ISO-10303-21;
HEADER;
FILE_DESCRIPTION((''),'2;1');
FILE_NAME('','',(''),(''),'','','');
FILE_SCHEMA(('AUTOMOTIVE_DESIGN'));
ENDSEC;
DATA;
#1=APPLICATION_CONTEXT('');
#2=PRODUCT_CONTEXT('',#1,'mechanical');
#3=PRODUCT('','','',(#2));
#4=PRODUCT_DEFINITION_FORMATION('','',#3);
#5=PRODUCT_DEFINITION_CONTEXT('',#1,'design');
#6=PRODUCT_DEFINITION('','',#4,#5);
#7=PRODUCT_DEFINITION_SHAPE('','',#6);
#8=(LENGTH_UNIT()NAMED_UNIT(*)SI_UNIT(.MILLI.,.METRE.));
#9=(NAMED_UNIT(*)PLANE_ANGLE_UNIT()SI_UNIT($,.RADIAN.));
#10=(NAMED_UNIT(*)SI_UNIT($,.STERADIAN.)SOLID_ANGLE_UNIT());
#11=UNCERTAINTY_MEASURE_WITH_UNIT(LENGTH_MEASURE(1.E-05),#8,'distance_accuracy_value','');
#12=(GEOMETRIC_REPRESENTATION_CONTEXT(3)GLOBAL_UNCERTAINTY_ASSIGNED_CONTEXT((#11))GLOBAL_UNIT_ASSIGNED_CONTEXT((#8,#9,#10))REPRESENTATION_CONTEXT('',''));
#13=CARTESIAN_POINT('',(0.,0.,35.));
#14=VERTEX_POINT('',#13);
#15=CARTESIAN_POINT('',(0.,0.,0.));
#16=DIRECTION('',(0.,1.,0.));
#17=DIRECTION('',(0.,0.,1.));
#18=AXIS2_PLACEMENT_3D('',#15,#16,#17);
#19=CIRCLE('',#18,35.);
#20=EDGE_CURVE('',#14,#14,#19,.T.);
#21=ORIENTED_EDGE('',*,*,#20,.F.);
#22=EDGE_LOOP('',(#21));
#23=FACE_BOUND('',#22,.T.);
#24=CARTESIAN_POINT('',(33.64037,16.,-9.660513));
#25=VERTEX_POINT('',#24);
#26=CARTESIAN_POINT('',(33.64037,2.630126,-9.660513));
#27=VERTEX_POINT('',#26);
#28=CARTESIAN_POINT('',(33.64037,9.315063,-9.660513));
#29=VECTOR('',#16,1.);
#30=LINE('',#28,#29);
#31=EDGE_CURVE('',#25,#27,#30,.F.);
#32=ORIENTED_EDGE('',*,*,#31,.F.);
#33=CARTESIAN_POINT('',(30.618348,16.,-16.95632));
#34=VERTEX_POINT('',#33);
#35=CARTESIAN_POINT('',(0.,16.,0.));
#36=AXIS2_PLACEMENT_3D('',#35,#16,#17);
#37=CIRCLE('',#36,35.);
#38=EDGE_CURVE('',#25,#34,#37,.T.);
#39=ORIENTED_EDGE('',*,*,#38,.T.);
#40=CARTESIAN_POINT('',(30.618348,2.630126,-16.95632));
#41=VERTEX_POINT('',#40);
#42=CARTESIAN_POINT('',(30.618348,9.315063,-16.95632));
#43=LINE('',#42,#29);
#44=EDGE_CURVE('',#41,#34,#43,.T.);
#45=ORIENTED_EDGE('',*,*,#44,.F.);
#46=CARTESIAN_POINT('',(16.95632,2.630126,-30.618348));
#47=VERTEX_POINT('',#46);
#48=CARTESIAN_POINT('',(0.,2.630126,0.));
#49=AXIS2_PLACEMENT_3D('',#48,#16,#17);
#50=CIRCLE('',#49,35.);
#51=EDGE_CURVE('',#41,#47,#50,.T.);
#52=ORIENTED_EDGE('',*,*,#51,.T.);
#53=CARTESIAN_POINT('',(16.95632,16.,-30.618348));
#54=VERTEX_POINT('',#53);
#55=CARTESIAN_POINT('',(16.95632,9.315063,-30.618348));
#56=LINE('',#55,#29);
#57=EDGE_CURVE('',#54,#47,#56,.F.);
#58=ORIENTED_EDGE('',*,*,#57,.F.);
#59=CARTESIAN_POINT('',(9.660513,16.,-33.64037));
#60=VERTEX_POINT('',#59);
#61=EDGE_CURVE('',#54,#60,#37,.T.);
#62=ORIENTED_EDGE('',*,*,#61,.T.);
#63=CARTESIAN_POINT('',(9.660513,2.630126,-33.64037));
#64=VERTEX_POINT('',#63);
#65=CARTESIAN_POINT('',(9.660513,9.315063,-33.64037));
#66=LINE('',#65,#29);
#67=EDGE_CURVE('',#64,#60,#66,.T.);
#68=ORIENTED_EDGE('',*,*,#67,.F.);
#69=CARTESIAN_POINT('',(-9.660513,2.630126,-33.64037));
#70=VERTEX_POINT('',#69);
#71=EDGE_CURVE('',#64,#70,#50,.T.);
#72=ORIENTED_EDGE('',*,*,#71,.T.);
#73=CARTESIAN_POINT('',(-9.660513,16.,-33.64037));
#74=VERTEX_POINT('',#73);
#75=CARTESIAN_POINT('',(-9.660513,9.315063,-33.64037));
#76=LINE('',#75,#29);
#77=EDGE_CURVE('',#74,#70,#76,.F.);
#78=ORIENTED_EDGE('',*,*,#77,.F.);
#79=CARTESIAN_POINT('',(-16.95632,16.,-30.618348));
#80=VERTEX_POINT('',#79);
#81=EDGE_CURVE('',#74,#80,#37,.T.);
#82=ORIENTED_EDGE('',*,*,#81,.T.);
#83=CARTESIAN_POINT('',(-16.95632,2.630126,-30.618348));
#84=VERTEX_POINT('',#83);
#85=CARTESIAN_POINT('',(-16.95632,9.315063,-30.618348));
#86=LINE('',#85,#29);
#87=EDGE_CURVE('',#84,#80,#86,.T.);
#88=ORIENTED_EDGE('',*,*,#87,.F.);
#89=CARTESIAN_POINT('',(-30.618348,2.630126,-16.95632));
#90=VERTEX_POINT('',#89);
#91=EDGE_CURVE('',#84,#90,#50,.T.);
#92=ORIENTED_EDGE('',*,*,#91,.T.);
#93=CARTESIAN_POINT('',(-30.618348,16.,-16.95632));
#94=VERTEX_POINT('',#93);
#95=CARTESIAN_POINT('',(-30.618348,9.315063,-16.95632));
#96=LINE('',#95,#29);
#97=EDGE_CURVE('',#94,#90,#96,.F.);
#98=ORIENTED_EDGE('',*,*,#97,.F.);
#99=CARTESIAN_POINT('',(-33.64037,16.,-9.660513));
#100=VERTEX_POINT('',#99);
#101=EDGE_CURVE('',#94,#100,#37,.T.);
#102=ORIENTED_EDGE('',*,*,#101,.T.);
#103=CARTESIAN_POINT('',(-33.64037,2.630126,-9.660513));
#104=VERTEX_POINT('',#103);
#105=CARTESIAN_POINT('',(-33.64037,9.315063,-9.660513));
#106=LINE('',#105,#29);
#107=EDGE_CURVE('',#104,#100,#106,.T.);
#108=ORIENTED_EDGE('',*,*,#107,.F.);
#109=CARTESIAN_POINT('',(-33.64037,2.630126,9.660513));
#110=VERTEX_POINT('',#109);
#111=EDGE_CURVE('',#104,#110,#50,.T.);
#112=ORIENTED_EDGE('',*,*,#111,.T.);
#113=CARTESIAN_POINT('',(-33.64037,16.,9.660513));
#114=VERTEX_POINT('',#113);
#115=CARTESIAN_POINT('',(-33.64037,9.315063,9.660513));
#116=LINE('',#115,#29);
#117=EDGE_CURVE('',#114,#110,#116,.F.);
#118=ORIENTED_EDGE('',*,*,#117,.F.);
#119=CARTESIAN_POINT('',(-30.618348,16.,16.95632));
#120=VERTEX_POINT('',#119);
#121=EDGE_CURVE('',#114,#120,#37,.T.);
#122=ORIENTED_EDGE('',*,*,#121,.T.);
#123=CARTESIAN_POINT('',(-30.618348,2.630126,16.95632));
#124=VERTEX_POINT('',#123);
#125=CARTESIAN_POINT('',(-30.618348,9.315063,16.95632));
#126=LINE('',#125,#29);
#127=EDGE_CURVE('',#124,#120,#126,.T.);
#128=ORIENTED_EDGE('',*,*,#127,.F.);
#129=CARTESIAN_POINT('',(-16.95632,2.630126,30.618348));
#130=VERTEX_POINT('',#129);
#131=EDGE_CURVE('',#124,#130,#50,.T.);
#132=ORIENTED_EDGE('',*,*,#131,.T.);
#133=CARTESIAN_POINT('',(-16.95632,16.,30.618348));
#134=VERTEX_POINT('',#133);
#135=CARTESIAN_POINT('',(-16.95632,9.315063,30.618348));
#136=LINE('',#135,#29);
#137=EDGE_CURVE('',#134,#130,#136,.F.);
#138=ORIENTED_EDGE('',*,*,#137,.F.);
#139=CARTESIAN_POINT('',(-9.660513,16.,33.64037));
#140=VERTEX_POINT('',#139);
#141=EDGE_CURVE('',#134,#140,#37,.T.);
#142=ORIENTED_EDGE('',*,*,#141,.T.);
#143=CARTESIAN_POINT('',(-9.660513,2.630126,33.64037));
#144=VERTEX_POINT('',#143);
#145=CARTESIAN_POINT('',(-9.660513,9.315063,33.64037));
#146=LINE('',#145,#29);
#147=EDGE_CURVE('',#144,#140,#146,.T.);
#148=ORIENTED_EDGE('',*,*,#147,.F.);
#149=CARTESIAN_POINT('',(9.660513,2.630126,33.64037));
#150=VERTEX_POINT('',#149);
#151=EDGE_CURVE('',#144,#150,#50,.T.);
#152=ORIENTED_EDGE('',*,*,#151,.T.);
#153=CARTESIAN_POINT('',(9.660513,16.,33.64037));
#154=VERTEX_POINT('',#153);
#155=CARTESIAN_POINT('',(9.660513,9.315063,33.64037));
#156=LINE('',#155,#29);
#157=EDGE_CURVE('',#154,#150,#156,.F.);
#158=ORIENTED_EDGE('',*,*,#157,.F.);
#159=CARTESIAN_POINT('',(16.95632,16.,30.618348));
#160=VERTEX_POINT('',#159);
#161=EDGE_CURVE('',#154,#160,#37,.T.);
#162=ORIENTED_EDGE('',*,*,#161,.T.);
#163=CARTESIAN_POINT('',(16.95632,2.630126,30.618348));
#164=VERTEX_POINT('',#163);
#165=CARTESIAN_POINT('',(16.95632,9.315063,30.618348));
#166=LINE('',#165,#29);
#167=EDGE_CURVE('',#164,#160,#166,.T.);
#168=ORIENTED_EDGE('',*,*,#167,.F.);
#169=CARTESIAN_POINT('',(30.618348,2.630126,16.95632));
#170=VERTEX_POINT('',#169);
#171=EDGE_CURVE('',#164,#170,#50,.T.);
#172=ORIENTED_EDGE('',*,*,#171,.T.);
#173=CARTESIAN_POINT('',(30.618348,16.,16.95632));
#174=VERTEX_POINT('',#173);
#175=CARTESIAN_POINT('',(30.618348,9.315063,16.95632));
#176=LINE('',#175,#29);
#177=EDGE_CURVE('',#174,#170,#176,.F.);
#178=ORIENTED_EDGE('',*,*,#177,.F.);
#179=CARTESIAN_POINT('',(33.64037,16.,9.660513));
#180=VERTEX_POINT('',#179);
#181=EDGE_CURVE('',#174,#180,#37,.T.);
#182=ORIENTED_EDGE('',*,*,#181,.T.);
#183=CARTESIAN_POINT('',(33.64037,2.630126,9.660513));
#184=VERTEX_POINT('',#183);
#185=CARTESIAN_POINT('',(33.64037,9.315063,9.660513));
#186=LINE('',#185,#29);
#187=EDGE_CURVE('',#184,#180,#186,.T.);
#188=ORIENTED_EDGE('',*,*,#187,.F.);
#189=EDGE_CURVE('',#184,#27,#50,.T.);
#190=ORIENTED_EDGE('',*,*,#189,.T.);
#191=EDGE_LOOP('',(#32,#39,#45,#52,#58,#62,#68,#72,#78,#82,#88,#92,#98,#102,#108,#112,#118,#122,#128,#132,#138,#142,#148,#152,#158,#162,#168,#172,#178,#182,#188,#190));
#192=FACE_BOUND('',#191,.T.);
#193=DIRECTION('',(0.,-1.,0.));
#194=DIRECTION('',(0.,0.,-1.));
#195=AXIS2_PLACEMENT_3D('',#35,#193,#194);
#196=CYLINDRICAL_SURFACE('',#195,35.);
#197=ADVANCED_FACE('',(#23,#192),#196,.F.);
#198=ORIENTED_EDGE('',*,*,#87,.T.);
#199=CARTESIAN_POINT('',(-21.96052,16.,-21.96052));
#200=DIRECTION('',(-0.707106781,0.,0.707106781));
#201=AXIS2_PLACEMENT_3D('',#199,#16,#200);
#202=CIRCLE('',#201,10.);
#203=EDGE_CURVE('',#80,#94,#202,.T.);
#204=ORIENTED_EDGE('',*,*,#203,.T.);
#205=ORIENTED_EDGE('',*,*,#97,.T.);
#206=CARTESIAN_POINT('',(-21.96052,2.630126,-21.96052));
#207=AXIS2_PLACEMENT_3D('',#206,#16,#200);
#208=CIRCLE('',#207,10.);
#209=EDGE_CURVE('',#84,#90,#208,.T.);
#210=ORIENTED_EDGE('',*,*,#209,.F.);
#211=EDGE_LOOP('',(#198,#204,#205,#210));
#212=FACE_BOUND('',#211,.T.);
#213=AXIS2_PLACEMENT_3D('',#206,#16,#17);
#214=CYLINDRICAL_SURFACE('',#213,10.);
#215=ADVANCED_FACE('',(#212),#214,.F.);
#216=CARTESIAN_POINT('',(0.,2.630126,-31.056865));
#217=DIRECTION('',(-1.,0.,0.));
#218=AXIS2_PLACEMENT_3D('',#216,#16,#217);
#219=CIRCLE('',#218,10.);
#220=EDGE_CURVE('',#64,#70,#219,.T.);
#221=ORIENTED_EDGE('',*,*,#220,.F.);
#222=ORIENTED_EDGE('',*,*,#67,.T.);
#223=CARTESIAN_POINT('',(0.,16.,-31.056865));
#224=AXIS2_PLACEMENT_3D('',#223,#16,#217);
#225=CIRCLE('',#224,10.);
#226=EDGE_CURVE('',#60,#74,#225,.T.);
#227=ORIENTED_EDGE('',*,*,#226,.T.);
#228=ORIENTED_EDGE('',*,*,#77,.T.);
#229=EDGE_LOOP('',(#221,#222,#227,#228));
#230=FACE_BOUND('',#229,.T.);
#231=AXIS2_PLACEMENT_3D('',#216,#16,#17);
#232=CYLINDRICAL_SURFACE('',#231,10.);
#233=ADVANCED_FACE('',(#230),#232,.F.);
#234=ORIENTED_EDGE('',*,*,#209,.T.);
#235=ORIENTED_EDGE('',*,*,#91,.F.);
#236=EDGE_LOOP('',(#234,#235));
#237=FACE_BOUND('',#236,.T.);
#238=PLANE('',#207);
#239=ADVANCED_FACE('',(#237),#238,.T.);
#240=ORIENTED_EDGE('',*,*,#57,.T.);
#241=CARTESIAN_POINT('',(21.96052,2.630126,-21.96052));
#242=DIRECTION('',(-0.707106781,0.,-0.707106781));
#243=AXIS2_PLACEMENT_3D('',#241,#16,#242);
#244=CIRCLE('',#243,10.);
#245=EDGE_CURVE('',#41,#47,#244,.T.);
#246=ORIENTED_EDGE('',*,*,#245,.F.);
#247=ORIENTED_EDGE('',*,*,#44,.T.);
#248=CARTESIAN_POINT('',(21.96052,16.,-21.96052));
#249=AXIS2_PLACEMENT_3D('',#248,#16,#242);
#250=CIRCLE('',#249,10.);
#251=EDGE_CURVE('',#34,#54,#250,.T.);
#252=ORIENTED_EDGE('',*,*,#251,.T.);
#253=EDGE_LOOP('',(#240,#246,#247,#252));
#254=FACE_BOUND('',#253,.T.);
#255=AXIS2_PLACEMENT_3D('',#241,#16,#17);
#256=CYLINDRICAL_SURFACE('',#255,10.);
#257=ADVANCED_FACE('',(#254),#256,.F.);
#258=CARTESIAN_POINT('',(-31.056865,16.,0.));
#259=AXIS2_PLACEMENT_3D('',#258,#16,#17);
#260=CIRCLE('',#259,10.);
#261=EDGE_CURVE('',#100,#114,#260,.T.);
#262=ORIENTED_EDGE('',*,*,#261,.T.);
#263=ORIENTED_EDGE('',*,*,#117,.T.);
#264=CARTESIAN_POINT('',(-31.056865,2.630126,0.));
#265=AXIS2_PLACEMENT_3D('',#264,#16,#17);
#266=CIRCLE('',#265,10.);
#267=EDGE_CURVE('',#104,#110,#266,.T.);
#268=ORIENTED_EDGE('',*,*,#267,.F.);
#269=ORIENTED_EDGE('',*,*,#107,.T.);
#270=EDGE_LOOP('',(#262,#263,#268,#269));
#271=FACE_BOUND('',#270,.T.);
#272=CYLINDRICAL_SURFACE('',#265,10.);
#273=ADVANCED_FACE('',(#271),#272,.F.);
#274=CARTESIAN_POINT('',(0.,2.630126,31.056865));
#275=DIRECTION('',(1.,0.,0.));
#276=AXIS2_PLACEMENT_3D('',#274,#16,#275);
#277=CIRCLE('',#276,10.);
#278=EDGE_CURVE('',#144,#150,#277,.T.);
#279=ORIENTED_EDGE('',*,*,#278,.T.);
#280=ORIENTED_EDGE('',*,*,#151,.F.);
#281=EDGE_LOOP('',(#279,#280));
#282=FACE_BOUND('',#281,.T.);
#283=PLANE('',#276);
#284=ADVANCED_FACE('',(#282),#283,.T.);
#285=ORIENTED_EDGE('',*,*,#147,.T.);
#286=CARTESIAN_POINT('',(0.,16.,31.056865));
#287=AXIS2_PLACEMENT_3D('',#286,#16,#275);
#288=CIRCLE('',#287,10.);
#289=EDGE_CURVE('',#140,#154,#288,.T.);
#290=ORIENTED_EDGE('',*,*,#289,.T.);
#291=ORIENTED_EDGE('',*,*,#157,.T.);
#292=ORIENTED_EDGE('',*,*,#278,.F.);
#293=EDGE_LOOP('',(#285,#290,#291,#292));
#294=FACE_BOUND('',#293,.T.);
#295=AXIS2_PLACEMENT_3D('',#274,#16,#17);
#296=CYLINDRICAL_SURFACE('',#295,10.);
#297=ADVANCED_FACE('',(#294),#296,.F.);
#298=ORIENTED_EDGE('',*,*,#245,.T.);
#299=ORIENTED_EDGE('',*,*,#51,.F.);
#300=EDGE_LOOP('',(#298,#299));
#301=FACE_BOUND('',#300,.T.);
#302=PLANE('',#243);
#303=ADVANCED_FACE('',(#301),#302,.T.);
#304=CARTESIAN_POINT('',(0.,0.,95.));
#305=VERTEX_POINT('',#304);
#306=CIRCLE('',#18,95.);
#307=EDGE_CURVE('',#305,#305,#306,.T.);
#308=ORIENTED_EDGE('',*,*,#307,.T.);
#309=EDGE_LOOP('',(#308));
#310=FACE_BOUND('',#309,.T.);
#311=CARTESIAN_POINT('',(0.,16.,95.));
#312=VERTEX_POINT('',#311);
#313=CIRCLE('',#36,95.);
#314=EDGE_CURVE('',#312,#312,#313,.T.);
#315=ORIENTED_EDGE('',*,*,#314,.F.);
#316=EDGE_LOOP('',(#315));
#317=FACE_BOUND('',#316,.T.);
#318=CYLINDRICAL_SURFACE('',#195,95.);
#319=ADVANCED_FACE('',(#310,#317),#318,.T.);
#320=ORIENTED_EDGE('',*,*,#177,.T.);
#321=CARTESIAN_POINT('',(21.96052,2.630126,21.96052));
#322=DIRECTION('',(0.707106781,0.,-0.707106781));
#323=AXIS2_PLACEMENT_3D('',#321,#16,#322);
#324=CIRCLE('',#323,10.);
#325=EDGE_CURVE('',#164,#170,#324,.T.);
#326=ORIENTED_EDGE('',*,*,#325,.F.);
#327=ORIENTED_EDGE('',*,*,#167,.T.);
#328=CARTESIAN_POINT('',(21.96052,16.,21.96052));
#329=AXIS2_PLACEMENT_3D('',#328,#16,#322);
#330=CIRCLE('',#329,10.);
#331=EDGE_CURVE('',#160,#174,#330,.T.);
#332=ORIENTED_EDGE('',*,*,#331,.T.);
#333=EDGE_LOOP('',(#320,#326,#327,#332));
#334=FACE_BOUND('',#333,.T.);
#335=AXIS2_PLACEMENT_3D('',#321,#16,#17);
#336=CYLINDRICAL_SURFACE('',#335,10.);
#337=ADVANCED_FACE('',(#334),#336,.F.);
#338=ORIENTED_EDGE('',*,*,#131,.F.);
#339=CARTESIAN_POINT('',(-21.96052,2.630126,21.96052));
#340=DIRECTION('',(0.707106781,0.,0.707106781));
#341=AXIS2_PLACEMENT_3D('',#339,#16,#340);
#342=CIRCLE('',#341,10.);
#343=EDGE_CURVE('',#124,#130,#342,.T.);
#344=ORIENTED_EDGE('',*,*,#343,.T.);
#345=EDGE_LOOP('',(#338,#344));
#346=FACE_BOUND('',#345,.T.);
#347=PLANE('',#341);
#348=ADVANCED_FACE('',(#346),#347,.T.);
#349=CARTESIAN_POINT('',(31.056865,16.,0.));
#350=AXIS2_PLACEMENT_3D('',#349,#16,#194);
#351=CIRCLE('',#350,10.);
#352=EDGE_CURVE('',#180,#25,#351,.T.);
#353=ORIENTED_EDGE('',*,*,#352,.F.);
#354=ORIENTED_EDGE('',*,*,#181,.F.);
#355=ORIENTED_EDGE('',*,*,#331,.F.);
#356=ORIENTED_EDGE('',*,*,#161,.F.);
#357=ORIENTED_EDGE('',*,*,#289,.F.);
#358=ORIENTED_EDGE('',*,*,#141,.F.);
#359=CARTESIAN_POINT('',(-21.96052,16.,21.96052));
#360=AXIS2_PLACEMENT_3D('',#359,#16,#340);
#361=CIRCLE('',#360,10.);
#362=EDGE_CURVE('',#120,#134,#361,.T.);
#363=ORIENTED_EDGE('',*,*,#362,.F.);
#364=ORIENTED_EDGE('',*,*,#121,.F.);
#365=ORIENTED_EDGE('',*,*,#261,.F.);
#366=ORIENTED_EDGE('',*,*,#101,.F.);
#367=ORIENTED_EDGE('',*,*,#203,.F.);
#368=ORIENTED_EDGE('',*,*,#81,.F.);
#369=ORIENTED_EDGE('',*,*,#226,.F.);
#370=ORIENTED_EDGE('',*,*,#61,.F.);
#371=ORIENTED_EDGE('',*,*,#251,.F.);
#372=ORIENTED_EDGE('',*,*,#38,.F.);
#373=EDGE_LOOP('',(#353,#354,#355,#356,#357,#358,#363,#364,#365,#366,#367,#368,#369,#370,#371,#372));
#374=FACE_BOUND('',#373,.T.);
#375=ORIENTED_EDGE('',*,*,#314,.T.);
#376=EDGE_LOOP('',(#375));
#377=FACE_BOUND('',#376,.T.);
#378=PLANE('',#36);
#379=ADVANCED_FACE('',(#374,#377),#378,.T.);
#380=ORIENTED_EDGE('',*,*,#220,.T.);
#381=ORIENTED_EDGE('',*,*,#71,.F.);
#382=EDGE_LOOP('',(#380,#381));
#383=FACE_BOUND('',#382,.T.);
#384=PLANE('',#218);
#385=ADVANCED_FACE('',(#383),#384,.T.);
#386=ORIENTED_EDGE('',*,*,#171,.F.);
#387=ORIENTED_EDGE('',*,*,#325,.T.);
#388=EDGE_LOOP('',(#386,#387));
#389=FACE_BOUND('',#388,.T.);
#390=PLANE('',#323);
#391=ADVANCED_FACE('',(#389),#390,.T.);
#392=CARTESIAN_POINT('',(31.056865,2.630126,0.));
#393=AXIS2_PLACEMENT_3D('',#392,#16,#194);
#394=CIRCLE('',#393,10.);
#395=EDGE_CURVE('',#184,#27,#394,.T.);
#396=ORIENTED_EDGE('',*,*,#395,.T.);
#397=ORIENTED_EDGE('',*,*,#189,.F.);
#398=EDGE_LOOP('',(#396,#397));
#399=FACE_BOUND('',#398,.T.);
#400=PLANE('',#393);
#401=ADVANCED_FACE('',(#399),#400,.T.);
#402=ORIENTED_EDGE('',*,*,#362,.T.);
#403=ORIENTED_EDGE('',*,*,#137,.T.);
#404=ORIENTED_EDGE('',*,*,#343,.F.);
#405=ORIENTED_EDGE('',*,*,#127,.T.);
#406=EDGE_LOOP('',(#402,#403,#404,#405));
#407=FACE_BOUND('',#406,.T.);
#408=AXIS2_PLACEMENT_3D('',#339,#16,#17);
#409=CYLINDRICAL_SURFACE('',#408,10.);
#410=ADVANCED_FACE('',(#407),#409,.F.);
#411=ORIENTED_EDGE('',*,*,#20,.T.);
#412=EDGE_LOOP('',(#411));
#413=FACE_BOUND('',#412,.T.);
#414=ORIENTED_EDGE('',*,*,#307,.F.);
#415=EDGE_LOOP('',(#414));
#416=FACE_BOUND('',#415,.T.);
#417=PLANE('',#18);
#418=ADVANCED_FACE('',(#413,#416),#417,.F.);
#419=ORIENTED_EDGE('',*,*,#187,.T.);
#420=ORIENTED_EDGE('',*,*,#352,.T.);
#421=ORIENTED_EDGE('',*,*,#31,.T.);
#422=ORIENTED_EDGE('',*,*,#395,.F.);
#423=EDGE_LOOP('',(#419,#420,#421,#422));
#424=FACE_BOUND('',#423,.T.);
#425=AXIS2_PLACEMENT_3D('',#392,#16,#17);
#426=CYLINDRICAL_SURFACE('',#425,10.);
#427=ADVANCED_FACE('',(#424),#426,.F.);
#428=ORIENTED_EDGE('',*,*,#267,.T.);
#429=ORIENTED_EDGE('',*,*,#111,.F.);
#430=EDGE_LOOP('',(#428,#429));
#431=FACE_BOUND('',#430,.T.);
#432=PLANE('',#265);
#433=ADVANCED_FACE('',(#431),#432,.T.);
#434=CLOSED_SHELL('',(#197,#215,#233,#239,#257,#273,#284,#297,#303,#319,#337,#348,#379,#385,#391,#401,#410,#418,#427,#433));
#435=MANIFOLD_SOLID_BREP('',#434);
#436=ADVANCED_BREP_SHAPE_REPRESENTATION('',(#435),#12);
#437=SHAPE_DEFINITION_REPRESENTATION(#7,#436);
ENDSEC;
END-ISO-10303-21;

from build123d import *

# Parameters (mm, degrees)
SKETCH1_R           = 95
BOSS_EXTRUDE1_DEPTH = 16
SKETCH2_R           = 35
CUT_EXTRUDE1_DEPTH  = 136.299667405
SKETCH3_R           = 10
CUT_EXTRUDE2_DEPTH  = 13.369874265
CIRPATTERN1_COUNT   = 8


with BuildPart() as part:
    # Sketch1 → Boss-Extrude1 (new body)
    with BuildSketch(Plane(origin=(0, 0, 0), x_dir=(1, 0, 0), z_dir=(0, 1, 0))):
        Circle(SKETCH1_R)
    extrude(amount=BOSS_EXTRUDE1_DEPTH)

    # Sketch2 → Cut-Extrude1 (cut, through all)
    with BuildSketch(Plane(origin=(0, 0, 0), x_dir=(1, 0, 0), z_dir=(0, 1, 0))):
        Circle(SKETCH2_R)
    extrude(amount=CUT_EXTRUDE1_DEPTH, mode=Mode.SUBTRACT)

    # Sketch3 → Cut-Extrude2 (cut)
    with BuildSketch(Plane(origin=(0, 16, 0), x_dir=(1, 0, 0), z_dir=(0, 1, 0))):
        with Locations((-31.056865323, 0)):
            Circle(SKETCH3_R)
    cut_extrude2 = extrude(amount=-CUT_EXTRUDE2_DEPTH, mode=Mode.SUBTRACT)

    # CirPattern1: Cut-Extrude2 ×8 about axis
    cirpattern1_axis = Axis((0, 0, 0), (0, 1, 0))
    for i in range(1, CIRPATTERN1_COUNT):
        add(cut_extrude2.rotate(cirpattern1_axis, i * 360 / CIRPATTERN1_COUNT), mode=Mode.SUBTRACT)


solid = part.part
